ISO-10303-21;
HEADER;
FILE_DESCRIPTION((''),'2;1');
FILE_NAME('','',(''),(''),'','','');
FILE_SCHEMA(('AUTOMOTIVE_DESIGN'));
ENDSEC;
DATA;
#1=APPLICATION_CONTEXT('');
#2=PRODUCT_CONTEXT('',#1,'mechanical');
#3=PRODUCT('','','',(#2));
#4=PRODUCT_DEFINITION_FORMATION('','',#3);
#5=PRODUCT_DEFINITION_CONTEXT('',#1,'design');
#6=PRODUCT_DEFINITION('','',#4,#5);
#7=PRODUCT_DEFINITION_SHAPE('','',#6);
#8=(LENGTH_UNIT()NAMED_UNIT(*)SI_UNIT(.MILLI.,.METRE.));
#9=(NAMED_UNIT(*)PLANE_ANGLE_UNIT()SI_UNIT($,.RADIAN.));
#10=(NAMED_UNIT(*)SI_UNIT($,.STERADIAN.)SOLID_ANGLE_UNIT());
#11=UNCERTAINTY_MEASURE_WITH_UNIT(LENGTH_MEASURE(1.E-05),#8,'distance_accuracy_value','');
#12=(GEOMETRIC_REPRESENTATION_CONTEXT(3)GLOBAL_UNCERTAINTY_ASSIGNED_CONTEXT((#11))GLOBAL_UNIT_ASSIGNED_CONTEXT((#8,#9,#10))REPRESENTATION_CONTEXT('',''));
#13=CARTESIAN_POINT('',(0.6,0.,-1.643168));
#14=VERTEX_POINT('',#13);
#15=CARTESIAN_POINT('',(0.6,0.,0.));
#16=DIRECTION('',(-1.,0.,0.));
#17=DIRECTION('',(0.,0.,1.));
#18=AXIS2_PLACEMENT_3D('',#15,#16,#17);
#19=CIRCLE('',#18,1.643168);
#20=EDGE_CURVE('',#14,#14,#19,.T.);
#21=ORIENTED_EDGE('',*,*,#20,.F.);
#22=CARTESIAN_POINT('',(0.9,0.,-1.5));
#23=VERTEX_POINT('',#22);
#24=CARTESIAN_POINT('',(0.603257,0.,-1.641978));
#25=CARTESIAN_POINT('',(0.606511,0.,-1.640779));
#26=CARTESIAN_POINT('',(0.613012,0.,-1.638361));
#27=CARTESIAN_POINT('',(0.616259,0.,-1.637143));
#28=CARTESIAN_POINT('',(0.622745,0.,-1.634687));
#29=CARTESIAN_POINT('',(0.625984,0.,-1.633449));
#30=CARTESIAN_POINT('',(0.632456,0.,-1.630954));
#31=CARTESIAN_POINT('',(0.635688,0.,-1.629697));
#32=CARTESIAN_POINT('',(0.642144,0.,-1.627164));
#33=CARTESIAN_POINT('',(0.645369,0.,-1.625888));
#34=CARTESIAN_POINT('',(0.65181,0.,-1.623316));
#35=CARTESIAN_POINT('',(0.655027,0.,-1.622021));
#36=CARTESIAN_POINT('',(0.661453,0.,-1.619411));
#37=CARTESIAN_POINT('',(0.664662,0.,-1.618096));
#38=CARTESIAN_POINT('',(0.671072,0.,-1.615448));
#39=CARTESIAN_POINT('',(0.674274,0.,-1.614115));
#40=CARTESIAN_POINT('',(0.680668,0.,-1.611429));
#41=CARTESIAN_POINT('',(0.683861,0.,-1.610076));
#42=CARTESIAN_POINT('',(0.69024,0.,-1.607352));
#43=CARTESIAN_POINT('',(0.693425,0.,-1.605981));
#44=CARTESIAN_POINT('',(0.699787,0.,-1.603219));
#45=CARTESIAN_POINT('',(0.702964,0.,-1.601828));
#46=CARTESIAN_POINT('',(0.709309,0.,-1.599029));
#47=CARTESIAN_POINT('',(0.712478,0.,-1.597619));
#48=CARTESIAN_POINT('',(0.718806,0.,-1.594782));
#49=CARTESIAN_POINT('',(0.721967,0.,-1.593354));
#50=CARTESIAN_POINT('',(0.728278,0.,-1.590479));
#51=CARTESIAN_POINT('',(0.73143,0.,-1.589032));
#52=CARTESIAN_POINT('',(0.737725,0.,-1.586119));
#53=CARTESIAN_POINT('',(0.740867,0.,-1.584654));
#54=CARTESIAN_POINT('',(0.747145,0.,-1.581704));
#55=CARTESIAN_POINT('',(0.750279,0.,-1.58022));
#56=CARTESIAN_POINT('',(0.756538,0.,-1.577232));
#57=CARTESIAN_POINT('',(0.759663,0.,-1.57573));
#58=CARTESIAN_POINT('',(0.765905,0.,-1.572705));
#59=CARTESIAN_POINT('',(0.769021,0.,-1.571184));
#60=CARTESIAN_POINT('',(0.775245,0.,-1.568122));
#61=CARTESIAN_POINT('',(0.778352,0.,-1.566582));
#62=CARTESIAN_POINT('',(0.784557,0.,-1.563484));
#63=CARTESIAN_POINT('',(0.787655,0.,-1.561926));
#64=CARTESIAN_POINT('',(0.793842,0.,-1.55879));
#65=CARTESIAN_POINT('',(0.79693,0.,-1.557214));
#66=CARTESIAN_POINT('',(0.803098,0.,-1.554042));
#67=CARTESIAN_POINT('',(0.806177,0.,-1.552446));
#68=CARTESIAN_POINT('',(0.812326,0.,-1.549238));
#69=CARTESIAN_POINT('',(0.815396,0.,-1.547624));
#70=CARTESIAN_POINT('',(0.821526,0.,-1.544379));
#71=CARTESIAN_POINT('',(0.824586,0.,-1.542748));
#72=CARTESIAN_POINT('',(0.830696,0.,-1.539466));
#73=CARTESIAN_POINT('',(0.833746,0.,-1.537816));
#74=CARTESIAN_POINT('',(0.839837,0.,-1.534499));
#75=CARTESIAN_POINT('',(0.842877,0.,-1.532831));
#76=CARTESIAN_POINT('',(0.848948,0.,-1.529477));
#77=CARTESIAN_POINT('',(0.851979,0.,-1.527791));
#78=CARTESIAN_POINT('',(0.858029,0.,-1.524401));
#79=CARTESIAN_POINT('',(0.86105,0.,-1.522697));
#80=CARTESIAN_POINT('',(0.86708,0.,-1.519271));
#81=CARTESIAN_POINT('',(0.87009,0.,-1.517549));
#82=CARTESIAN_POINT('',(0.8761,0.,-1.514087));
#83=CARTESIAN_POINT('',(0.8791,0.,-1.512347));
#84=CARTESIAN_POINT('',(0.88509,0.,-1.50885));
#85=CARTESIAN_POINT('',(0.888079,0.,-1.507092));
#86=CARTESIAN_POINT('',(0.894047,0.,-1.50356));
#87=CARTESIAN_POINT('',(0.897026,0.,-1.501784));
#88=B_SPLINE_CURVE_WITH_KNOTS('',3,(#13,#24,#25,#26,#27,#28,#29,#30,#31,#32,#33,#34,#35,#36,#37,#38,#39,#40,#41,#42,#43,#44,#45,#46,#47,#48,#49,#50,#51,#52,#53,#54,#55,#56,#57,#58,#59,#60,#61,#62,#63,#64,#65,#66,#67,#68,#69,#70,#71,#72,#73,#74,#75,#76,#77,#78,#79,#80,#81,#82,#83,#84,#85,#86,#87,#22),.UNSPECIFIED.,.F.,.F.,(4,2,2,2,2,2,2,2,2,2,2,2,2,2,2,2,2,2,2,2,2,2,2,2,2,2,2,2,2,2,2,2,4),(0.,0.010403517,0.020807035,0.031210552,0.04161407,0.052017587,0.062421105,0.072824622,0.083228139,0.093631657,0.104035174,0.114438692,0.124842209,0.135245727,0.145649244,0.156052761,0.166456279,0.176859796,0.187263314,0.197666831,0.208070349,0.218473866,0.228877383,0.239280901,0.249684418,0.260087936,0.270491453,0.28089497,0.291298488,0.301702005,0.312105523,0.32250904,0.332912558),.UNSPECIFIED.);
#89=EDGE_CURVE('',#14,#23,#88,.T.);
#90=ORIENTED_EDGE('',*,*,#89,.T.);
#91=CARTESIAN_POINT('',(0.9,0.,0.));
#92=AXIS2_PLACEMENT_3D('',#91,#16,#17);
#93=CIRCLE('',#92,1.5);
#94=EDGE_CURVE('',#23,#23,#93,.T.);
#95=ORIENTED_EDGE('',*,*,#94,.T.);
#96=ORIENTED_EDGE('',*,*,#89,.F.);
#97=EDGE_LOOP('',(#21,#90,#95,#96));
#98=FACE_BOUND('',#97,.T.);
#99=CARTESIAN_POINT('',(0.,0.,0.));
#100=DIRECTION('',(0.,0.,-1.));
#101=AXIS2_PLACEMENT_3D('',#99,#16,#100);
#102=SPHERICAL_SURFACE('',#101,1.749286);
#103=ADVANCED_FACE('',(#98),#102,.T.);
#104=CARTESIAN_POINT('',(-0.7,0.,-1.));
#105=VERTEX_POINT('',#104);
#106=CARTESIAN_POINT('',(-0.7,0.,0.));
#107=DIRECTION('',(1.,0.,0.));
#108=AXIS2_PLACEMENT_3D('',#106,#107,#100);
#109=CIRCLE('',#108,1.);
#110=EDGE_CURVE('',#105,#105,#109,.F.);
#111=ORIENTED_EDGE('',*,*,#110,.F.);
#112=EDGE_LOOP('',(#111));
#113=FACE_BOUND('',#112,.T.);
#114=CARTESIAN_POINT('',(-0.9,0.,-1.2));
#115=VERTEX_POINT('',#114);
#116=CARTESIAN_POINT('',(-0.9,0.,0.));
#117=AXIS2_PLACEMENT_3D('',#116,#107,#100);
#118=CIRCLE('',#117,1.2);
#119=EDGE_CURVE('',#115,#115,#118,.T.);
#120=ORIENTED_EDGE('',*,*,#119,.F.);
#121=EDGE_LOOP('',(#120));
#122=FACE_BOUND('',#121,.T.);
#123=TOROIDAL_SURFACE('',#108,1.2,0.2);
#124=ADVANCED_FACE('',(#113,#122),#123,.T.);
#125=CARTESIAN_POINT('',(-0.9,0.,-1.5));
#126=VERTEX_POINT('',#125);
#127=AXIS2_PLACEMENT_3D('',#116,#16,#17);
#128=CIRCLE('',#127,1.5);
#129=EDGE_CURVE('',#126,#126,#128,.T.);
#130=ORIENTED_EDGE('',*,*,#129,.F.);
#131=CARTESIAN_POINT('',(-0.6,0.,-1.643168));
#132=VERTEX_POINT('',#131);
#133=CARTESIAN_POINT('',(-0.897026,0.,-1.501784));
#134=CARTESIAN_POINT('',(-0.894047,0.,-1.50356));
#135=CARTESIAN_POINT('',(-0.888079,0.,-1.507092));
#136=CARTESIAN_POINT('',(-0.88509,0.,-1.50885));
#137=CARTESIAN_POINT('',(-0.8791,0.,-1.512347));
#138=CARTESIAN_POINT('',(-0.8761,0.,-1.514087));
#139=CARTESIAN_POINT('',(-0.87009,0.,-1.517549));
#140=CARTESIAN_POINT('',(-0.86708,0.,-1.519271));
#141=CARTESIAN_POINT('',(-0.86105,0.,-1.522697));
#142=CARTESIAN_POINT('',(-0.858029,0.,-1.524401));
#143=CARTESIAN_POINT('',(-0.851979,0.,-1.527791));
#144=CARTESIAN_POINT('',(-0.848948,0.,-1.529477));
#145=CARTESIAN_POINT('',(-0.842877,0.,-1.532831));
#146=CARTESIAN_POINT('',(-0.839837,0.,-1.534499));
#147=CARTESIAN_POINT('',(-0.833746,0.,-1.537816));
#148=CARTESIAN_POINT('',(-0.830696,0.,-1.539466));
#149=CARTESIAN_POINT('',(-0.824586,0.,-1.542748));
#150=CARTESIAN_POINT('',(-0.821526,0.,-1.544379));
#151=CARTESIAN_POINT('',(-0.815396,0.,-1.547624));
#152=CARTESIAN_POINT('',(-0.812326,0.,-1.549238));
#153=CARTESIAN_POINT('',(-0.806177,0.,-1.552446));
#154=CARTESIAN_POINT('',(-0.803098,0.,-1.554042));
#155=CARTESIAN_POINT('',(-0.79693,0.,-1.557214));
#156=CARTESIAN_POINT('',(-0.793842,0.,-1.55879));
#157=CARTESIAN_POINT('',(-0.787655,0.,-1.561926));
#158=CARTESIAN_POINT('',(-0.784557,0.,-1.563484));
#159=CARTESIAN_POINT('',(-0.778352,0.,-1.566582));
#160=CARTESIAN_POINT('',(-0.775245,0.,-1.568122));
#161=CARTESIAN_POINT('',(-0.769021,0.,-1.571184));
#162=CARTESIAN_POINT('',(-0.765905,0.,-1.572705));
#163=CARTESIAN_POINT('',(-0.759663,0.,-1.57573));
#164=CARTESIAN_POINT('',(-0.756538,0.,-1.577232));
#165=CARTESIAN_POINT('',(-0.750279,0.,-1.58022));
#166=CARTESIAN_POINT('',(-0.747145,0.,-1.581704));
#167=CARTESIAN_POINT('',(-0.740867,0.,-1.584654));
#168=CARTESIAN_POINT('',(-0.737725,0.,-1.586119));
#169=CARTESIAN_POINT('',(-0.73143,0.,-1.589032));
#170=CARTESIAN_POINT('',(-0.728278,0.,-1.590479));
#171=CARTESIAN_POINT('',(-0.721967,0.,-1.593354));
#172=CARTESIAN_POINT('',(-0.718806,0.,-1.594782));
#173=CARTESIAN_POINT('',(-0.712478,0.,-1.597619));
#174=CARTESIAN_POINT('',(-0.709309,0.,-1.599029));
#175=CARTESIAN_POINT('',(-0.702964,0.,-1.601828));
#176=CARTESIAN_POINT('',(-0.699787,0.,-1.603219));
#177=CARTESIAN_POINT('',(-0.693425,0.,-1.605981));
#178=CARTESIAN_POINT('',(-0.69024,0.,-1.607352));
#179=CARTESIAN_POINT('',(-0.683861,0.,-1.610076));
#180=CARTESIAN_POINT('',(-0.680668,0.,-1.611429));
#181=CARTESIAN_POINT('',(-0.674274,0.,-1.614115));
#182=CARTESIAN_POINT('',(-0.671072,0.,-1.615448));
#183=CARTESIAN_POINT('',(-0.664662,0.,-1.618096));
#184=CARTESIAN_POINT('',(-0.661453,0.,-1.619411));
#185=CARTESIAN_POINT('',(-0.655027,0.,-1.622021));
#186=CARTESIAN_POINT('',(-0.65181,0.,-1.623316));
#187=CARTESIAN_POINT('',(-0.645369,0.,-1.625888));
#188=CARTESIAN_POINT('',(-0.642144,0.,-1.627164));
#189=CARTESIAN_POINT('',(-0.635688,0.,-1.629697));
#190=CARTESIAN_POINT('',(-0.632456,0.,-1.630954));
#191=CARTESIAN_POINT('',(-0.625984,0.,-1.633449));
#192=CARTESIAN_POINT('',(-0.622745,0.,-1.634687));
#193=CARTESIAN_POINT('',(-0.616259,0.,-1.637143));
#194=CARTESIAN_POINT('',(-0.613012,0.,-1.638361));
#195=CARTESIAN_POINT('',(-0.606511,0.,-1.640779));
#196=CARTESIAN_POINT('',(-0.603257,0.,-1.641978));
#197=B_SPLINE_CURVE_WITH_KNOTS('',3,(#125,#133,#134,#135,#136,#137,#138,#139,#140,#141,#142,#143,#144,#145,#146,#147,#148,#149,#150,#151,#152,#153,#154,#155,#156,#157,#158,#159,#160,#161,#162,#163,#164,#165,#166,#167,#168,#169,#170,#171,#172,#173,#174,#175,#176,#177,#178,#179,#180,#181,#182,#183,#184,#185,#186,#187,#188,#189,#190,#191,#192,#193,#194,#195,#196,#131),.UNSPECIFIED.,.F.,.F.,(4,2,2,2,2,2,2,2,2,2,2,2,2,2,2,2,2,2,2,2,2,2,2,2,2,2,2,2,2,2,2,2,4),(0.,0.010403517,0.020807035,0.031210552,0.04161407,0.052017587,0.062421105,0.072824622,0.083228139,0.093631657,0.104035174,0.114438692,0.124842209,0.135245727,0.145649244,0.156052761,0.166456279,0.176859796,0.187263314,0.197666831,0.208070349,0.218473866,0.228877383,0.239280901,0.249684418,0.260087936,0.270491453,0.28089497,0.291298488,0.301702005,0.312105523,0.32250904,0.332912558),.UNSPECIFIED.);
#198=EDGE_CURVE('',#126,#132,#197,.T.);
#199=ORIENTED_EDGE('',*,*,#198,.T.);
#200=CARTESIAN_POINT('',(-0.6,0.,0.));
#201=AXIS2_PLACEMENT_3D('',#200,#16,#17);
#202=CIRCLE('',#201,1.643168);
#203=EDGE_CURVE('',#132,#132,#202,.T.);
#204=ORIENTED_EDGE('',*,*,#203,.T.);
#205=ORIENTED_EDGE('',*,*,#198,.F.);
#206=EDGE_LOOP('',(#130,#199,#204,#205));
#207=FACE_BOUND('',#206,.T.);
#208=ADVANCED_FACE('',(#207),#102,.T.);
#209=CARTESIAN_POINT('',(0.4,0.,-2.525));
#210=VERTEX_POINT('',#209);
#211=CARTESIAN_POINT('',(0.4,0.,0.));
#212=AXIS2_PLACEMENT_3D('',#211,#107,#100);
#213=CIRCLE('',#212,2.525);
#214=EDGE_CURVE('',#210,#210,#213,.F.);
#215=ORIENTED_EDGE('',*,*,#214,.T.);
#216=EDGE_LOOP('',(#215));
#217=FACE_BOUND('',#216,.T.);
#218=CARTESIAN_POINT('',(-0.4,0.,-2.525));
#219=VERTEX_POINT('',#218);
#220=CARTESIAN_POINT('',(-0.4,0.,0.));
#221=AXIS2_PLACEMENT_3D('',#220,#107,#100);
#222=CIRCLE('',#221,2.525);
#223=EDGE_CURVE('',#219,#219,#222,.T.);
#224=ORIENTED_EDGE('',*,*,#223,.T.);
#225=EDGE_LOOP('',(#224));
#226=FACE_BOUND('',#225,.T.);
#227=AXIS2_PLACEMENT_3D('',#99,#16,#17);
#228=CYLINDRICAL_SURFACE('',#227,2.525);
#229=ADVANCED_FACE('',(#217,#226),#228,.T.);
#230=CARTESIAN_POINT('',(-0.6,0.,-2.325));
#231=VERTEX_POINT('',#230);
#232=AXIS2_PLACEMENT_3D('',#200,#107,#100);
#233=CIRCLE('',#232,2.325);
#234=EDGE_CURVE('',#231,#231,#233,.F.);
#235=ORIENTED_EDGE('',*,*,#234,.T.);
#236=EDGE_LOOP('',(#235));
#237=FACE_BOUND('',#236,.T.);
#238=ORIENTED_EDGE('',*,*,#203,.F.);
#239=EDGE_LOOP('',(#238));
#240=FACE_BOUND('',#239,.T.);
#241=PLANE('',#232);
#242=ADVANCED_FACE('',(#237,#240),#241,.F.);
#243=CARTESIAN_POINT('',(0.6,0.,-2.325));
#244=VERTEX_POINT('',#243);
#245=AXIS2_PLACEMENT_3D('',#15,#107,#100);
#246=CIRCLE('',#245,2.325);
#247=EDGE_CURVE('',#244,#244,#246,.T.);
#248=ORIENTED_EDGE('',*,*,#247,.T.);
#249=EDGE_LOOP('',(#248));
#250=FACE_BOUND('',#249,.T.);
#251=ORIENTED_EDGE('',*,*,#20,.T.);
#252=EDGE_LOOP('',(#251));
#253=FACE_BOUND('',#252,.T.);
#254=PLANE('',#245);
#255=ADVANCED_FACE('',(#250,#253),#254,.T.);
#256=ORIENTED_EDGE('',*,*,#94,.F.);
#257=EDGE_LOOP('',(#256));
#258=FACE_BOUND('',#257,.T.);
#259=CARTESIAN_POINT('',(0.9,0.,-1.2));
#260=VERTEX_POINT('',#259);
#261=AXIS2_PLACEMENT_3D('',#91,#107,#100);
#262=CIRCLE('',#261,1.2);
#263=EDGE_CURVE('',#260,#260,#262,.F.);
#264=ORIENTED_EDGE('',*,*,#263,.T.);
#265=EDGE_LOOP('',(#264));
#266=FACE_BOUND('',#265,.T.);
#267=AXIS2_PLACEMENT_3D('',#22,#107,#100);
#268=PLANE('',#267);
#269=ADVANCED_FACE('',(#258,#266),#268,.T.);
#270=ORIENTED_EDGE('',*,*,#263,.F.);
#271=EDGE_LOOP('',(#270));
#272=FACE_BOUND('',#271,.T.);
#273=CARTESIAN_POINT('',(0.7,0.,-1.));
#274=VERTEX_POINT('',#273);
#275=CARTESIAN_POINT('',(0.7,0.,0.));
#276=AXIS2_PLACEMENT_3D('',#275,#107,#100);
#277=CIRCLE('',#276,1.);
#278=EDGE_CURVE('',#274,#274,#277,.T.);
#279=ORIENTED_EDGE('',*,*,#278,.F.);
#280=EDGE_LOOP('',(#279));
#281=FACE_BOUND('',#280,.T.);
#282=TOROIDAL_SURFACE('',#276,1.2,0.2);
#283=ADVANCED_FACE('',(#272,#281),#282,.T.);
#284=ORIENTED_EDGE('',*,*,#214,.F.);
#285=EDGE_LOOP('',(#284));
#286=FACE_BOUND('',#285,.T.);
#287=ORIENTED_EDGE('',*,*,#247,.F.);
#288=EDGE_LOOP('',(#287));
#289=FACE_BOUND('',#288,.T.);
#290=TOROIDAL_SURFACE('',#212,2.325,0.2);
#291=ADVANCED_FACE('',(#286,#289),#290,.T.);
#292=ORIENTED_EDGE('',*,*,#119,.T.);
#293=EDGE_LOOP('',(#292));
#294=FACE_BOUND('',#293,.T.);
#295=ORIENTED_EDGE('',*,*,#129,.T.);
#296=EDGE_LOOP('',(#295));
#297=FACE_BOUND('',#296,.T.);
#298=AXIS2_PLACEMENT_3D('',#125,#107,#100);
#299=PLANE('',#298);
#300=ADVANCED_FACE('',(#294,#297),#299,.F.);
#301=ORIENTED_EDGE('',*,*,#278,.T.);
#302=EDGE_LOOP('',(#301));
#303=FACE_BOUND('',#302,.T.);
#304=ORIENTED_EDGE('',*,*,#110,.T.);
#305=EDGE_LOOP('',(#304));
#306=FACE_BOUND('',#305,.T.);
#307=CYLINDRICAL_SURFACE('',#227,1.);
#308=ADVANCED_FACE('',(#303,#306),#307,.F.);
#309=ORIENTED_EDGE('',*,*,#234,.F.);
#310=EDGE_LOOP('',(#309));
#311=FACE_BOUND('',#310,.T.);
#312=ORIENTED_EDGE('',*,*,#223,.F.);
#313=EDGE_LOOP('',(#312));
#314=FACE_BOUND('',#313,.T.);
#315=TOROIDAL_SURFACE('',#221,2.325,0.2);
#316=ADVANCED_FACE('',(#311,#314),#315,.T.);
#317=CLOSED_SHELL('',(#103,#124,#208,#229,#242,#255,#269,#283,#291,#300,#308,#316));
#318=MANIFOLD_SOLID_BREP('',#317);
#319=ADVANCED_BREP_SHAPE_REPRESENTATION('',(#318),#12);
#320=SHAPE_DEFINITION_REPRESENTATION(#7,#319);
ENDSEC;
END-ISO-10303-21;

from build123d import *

# Parameters (mm, degrees)
FILLET1_R = 0.2


with BuildPart() as part:
    # Sketch1 → Revolve1 (revolve)
    with BuildSketch(Plane(origin=(0, 0, 0), x_dir=(1, 0, 0), z_dir=(0, 1, 0))):
        with BuildLine():
            Line((0.6, 2.525), (-0.6, 2.525))
            Line((-0.6, 2.525), (-0.6, 1.643167673))
            ThreePointArc((-0.6, 1.643167673), (-0.753408419, 1.578725991), (-0.9, 1.5))
            Line((-0.9, 1.5), (-0.9, 1))
            Line((-0.9, 1), (0.9, 1))
            Line((0.9, 1), (0.9, 1.5))
            ThreePointArc((0.9, 1.5), (0.753408419, 1.578725991), (0.6, 1.643167673))
            Line((0.6, 1.643167673), (0.6, 2.525))
        make_face()
    revolve(axis=Axis((0, 0, 0), (1, 0, 0)))

    # Fillet1
    fillet1_edges = [part.edges().sort_by_distance(p)[0] for p in [
        (-0.9, 0, 1),
        (0.9, 0, 1),
        (-0.6, 0, 2.525),
        (0.6, 0, 2.525),
    ]]
    fillet(fillet1_edges, radius=FILLET1_R)


solid = part.part
